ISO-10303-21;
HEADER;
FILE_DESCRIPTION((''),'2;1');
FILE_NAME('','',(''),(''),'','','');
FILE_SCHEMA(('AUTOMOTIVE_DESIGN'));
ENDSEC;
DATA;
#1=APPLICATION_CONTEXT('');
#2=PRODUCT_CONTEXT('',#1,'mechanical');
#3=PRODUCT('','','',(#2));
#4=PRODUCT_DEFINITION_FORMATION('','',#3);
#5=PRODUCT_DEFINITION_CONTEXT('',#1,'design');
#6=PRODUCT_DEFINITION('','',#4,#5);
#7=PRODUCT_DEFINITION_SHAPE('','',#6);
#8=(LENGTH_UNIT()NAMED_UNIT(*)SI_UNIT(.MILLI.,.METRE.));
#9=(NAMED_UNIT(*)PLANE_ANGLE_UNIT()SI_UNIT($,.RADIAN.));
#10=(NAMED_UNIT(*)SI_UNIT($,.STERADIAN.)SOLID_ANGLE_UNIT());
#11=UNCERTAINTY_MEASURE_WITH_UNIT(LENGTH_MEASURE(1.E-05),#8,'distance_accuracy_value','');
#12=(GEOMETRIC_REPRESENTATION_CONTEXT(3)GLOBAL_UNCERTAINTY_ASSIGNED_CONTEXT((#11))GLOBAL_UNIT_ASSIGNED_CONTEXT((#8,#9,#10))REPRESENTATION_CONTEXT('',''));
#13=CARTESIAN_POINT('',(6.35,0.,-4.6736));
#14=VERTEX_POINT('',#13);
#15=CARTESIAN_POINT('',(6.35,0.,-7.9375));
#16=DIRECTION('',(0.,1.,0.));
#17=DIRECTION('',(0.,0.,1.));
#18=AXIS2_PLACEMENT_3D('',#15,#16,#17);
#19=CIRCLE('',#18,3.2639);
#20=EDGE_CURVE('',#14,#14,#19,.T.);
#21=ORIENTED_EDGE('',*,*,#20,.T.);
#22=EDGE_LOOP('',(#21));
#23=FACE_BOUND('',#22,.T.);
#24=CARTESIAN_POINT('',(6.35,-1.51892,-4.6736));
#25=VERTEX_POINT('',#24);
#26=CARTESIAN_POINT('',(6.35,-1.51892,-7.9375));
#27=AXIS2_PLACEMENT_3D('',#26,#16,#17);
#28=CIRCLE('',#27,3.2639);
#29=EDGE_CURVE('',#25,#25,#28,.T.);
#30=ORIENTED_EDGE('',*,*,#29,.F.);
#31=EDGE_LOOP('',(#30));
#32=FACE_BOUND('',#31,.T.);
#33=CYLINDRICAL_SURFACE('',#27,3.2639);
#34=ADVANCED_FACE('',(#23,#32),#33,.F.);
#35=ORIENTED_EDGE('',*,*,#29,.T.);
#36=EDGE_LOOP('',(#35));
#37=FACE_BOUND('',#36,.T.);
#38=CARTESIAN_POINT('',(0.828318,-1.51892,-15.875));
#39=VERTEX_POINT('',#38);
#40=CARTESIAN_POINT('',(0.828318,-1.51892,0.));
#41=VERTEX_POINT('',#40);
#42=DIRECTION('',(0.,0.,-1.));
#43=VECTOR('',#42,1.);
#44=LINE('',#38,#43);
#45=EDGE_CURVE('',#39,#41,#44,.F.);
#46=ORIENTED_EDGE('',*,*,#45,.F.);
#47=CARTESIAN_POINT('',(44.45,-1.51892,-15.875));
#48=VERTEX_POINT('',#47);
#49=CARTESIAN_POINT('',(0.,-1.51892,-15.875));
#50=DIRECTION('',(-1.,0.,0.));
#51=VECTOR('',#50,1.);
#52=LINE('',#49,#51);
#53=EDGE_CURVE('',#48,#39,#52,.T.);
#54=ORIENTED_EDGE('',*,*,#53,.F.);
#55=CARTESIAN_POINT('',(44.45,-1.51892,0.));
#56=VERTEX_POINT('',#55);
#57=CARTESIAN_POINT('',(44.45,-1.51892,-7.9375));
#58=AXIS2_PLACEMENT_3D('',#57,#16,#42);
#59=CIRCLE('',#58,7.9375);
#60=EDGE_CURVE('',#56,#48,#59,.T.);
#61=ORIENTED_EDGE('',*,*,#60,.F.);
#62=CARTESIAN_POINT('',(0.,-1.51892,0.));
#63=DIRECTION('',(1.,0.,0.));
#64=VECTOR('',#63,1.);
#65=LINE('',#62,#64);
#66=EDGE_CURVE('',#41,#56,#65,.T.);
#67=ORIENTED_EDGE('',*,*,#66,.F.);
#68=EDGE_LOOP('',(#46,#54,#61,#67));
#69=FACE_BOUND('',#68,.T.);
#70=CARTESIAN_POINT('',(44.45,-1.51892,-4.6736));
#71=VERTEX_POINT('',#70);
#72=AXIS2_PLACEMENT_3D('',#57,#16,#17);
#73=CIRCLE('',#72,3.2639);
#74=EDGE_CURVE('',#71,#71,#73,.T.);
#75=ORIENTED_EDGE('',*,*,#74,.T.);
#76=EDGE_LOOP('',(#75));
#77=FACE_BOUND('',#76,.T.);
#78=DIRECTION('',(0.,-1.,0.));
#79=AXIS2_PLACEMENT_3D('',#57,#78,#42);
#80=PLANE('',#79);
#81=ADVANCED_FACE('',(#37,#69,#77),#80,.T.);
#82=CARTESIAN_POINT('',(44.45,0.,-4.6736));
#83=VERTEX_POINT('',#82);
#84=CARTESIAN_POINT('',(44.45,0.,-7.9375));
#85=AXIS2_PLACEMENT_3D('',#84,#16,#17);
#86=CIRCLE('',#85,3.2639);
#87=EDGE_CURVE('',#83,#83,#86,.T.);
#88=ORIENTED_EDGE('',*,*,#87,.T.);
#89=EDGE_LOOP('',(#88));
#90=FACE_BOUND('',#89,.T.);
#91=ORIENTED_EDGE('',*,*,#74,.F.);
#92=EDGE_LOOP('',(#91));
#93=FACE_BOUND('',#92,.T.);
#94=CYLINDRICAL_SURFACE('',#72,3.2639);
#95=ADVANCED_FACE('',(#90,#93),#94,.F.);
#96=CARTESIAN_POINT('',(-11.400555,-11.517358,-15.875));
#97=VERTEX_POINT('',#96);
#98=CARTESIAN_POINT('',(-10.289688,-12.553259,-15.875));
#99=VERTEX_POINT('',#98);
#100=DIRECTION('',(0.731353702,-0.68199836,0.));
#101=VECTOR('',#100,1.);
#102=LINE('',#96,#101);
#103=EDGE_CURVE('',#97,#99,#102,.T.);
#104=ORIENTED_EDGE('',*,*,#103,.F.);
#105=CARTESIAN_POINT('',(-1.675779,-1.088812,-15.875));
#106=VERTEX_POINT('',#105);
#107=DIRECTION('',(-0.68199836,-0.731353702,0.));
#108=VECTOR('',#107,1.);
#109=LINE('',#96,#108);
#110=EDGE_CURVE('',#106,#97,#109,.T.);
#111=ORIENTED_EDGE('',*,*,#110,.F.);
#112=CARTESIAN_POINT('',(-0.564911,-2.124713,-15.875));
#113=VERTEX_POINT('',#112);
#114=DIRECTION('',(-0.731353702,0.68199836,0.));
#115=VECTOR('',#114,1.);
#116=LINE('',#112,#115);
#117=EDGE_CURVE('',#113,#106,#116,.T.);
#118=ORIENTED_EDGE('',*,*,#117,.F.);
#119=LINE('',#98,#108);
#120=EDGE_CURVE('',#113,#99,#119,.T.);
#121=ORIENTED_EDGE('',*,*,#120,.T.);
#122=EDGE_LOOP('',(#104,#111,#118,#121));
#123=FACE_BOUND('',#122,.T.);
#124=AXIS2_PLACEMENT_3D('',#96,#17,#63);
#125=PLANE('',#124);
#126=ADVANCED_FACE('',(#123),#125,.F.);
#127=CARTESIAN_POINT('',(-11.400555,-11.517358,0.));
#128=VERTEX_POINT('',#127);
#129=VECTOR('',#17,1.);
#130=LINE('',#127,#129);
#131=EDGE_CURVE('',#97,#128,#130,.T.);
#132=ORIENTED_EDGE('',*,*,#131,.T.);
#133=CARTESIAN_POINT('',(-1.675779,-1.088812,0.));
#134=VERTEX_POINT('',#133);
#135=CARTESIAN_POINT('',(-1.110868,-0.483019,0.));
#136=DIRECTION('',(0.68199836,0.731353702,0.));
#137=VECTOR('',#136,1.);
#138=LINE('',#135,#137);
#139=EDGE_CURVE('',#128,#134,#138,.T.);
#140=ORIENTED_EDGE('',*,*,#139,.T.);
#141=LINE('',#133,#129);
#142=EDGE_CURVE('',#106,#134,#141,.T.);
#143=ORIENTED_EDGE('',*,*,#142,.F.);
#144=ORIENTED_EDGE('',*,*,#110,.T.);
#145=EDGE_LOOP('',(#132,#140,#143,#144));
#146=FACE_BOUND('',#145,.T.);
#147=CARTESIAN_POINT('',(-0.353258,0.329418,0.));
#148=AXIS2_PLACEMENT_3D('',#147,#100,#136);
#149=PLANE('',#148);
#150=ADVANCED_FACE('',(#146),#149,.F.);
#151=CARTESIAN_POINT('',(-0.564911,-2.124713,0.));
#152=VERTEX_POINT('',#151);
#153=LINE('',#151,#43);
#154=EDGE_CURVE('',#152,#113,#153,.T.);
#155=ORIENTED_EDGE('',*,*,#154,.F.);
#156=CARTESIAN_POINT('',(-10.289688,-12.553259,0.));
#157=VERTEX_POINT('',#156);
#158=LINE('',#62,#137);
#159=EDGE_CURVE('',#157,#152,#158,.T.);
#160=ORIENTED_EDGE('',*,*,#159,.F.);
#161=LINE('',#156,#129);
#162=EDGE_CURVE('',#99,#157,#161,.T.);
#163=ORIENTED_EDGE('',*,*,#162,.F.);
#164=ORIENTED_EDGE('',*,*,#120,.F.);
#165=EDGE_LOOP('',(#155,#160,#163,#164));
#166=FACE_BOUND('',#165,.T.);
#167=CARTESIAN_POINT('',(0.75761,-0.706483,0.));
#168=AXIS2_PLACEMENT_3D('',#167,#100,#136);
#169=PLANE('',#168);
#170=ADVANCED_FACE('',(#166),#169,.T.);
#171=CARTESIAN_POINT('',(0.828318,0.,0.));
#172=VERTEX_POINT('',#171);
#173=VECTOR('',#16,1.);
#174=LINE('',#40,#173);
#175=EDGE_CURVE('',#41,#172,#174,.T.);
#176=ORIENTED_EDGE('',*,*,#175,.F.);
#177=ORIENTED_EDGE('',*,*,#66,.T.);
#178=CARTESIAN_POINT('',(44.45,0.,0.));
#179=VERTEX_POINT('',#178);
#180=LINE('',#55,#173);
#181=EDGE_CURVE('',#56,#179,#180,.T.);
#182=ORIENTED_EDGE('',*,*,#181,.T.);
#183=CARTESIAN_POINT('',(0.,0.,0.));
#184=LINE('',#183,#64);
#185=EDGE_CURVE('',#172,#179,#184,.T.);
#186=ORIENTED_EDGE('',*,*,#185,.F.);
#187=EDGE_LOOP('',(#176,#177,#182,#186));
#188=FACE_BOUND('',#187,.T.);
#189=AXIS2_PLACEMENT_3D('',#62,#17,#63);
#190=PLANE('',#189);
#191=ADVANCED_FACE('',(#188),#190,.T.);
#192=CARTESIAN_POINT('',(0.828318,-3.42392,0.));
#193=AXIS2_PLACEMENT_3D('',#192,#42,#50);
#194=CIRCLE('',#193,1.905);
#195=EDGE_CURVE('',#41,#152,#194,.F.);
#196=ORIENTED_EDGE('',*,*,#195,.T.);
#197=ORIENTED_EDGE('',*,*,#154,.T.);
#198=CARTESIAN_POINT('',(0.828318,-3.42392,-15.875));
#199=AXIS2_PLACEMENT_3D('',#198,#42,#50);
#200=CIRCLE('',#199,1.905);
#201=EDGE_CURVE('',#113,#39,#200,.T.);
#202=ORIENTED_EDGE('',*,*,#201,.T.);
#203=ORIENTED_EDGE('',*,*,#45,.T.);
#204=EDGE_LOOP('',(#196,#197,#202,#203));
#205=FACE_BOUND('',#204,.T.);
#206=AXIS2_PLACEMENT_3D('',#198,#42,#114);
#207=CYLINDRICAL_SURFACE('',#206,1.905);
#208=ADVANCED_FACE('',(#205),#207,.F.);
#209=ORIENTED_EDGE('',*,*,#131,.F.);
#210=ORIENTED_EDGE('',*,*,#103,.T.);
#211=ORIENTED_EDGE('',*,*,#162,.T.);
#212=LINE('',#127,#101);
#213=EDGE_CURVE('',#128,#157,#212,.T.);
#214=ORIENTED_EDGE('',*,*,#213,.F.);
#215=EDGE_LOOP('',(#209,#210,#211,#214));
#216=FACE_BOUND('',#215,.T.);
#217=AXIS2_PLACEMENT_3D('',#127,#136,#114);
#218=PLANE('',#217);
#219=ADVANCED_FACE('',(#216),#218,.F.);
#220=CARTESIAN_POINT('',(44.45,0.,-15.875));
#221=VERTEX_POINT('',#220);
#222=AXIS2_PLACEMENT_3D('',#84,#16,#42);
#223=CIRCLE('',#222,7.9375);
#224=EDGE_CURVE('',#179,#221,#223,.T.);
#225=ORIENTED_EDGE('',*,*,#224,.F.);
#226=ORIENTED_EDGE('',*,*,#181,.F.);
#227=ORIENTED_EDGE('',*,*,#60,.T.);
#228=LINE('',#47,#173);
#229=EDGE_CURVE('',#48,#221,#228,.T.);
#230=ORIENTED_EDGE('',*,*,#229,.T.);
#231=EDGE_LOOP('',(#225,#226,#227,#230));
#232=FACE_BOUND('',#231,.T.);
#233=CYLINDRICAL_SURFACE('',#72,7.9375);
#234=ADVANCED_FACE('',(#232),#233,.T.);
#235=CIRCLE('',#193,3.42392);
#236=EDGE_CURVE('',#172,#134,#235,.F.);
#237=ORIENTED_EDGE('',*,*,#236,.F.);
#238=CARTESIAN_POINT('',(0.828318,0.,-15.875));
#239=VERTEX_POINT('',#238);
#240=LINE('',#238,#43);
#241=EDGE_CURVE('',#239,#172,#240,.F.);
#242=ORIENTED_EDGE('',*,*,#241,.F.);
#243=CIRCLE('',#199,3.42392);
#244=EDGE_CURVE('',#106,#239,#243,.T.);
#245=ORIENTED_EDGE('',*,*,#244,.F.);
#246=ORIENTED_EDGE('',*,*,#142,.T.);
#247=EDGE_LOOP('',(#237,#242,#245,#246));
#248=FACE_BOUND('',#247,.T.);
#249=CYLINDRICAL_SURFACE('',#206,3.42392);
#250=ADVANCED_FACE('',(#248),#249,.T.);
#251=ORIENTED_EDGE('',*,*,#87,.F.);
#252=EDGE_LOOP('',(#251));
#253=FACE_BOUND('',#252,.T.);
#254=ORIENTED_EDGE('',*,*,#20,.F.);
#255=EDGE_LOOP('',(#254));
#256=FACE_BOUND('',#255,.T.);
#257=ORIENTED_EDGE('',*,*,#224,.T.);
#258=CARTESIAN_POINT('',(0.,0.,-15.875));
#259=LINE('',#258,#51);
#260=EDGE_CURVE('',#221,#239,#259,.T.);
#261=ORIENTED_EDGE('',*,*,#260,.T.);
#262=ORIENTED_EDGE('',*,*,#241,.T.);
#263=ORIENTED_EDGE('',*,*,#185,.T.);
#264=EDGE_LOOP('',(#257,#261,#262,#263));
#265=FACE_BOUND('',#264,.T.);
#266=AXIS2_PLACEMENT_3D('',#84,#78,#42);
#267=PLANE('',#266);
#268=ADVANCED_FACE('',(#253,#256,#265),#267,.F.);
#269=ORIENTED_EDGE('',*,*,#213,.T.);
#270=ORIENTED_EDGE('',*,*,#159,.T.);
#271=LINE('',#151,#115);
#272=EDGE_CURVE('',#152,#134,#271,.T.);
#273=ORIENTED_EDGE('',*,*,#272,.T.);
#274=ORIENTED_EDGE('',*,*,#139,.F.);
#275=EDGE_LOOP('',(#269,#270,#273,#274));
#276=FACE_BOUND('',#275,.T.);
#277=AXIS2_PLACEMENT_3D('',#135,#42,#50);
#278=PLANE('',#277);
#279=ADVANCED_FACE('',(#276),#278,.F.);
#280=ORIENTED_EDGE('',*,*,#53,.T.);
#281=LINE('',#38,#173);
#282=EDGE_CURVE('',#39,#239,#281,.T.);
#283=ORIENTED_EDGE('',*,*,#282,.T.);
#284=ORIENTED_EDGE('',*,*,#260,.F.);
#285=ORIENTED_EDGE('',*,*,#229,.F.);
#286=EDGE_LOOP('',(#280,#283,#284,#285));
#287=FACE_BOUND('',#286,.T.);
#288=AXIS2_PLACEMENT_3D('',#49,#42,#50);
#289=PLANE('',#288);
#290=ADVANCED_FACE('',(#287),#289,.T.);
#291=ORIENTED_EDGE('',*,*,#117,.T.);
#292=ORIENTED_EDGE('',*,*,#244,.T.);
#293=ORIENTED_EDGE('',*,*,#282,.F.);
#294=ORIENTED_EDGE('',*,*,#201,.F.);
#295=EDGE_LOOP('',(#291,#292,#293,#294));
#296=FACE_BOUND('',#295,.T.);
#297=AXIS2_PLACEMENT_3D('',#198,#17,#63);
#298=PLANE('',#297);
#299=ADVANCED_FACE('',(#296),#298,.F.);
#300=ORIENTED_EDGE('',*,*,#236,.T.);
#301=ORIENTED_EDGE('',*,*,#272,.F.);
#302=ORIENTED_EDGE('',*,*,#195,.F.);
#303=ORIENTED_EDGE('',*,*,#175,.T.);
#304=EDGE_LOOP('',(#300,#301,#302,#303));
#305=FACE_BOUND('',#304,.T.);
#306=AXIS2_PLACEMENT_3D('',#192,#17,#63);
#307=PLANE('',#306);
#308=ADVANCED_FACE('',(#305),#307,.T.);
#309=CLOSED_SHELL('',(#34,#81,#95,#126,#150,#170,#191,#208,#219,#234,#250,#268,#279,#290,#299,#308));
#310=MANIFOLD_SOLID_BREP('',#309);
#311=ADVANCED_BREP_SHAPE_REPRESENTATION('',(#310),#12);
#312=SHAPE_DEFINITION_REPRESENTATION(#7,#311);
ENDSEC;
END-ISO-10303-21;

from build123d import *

# Parameters (mm, degrees)
SKETCH1_R                    = 3.2639
BASE_FLANGE1_DEPTH           = 1.51892
EDGE_FLANGE1_STRIP_CUT_DEPTH = 15.875
EDGE_FLANGE1_DEPTH           = 15.875


# Sheet-metal steps are written as plain solids
with BuildPart() as part:
    # Sketch1 → Base-Flange1 (new body)
    with BuildSketch(Plane(origin=(0, 0, 0), x_dir=(1, 0, 0), z_dir=(0, 1, 0))):
        with BuildLine():
            Line((0, 0), (44.45, 0))
            ThreePointArc((44.45, 0), (52.3875, 7.9375), (44.45, 15.875))
            Line((44.45, 15.875), (0, 15.875))
            Line((0, 15.875), (0, 0))
        make_face()
        with Locations(Location((44.45, 7.9375, 0), (0, 0, 270))):
            Circle(SKETCH1_R, mode=Mode.SUBTRACT)
        with Locations(Location((6.35, 7.9375, 0), (0, 0, 270))):
            Circle(SKETCH1_R, mode=Mode.SUBTRACT)
    extrude(amount=-BASE_FLANGE1_DEPTH)

    # Edge-Flange1 strip (across the edge) → Edge-Flange1 strip cut (cut)
    with BuildSketch(Plane(origin=(0, -1.51892, 0), x_dir=(0.7313537016191672, -0.6819983600625019, 0), z_dir=(0, 0, -1))):
        Polygon((-7.660036486, 5.066238556), (-0.430107825, -1.675778992), (0.605793124, -0.564911227), (-6.624135537, 6.177106321), align=None)
    extrude(amount=EDGE_FLANGE1_STRIP_CUT_DEPTH, mode=Mode.SUBTRACT)

    # Edge-Flange1 section (across the edge) → Edge-Flange1 (add)
    with BuildSketch(Plane(origin=(0, -1.51892, 0), x_dir=(0.7313537016191672, -0.6819983600625019, 0), z_dir=(0, 0, -1))):
        with BuildLine():
            Line((-1.51892, 0.828317574), (-1.51892, 15.087554787))
            Line((-1.51892, 15.087554787), (0, 15.087554787))
            Line((0, 15.087554787), (0, 0.828317574))
            ThreePointArc((0, 0.828317574), (0.158000558, 0.068700598), (0.605793124, -0.564911227))
            Line((0.605793124, -0.564911227), (-0.430107825, -1.675778992))
            ThreePointArc((-0.430107825, -1.675778992), (-1.23494033, -0.536967338), (-1.51892, 0.828317574))
        make_face()
    extrude(amount=EDGE_FLANGE1_DEPTH)


solid = part.part
